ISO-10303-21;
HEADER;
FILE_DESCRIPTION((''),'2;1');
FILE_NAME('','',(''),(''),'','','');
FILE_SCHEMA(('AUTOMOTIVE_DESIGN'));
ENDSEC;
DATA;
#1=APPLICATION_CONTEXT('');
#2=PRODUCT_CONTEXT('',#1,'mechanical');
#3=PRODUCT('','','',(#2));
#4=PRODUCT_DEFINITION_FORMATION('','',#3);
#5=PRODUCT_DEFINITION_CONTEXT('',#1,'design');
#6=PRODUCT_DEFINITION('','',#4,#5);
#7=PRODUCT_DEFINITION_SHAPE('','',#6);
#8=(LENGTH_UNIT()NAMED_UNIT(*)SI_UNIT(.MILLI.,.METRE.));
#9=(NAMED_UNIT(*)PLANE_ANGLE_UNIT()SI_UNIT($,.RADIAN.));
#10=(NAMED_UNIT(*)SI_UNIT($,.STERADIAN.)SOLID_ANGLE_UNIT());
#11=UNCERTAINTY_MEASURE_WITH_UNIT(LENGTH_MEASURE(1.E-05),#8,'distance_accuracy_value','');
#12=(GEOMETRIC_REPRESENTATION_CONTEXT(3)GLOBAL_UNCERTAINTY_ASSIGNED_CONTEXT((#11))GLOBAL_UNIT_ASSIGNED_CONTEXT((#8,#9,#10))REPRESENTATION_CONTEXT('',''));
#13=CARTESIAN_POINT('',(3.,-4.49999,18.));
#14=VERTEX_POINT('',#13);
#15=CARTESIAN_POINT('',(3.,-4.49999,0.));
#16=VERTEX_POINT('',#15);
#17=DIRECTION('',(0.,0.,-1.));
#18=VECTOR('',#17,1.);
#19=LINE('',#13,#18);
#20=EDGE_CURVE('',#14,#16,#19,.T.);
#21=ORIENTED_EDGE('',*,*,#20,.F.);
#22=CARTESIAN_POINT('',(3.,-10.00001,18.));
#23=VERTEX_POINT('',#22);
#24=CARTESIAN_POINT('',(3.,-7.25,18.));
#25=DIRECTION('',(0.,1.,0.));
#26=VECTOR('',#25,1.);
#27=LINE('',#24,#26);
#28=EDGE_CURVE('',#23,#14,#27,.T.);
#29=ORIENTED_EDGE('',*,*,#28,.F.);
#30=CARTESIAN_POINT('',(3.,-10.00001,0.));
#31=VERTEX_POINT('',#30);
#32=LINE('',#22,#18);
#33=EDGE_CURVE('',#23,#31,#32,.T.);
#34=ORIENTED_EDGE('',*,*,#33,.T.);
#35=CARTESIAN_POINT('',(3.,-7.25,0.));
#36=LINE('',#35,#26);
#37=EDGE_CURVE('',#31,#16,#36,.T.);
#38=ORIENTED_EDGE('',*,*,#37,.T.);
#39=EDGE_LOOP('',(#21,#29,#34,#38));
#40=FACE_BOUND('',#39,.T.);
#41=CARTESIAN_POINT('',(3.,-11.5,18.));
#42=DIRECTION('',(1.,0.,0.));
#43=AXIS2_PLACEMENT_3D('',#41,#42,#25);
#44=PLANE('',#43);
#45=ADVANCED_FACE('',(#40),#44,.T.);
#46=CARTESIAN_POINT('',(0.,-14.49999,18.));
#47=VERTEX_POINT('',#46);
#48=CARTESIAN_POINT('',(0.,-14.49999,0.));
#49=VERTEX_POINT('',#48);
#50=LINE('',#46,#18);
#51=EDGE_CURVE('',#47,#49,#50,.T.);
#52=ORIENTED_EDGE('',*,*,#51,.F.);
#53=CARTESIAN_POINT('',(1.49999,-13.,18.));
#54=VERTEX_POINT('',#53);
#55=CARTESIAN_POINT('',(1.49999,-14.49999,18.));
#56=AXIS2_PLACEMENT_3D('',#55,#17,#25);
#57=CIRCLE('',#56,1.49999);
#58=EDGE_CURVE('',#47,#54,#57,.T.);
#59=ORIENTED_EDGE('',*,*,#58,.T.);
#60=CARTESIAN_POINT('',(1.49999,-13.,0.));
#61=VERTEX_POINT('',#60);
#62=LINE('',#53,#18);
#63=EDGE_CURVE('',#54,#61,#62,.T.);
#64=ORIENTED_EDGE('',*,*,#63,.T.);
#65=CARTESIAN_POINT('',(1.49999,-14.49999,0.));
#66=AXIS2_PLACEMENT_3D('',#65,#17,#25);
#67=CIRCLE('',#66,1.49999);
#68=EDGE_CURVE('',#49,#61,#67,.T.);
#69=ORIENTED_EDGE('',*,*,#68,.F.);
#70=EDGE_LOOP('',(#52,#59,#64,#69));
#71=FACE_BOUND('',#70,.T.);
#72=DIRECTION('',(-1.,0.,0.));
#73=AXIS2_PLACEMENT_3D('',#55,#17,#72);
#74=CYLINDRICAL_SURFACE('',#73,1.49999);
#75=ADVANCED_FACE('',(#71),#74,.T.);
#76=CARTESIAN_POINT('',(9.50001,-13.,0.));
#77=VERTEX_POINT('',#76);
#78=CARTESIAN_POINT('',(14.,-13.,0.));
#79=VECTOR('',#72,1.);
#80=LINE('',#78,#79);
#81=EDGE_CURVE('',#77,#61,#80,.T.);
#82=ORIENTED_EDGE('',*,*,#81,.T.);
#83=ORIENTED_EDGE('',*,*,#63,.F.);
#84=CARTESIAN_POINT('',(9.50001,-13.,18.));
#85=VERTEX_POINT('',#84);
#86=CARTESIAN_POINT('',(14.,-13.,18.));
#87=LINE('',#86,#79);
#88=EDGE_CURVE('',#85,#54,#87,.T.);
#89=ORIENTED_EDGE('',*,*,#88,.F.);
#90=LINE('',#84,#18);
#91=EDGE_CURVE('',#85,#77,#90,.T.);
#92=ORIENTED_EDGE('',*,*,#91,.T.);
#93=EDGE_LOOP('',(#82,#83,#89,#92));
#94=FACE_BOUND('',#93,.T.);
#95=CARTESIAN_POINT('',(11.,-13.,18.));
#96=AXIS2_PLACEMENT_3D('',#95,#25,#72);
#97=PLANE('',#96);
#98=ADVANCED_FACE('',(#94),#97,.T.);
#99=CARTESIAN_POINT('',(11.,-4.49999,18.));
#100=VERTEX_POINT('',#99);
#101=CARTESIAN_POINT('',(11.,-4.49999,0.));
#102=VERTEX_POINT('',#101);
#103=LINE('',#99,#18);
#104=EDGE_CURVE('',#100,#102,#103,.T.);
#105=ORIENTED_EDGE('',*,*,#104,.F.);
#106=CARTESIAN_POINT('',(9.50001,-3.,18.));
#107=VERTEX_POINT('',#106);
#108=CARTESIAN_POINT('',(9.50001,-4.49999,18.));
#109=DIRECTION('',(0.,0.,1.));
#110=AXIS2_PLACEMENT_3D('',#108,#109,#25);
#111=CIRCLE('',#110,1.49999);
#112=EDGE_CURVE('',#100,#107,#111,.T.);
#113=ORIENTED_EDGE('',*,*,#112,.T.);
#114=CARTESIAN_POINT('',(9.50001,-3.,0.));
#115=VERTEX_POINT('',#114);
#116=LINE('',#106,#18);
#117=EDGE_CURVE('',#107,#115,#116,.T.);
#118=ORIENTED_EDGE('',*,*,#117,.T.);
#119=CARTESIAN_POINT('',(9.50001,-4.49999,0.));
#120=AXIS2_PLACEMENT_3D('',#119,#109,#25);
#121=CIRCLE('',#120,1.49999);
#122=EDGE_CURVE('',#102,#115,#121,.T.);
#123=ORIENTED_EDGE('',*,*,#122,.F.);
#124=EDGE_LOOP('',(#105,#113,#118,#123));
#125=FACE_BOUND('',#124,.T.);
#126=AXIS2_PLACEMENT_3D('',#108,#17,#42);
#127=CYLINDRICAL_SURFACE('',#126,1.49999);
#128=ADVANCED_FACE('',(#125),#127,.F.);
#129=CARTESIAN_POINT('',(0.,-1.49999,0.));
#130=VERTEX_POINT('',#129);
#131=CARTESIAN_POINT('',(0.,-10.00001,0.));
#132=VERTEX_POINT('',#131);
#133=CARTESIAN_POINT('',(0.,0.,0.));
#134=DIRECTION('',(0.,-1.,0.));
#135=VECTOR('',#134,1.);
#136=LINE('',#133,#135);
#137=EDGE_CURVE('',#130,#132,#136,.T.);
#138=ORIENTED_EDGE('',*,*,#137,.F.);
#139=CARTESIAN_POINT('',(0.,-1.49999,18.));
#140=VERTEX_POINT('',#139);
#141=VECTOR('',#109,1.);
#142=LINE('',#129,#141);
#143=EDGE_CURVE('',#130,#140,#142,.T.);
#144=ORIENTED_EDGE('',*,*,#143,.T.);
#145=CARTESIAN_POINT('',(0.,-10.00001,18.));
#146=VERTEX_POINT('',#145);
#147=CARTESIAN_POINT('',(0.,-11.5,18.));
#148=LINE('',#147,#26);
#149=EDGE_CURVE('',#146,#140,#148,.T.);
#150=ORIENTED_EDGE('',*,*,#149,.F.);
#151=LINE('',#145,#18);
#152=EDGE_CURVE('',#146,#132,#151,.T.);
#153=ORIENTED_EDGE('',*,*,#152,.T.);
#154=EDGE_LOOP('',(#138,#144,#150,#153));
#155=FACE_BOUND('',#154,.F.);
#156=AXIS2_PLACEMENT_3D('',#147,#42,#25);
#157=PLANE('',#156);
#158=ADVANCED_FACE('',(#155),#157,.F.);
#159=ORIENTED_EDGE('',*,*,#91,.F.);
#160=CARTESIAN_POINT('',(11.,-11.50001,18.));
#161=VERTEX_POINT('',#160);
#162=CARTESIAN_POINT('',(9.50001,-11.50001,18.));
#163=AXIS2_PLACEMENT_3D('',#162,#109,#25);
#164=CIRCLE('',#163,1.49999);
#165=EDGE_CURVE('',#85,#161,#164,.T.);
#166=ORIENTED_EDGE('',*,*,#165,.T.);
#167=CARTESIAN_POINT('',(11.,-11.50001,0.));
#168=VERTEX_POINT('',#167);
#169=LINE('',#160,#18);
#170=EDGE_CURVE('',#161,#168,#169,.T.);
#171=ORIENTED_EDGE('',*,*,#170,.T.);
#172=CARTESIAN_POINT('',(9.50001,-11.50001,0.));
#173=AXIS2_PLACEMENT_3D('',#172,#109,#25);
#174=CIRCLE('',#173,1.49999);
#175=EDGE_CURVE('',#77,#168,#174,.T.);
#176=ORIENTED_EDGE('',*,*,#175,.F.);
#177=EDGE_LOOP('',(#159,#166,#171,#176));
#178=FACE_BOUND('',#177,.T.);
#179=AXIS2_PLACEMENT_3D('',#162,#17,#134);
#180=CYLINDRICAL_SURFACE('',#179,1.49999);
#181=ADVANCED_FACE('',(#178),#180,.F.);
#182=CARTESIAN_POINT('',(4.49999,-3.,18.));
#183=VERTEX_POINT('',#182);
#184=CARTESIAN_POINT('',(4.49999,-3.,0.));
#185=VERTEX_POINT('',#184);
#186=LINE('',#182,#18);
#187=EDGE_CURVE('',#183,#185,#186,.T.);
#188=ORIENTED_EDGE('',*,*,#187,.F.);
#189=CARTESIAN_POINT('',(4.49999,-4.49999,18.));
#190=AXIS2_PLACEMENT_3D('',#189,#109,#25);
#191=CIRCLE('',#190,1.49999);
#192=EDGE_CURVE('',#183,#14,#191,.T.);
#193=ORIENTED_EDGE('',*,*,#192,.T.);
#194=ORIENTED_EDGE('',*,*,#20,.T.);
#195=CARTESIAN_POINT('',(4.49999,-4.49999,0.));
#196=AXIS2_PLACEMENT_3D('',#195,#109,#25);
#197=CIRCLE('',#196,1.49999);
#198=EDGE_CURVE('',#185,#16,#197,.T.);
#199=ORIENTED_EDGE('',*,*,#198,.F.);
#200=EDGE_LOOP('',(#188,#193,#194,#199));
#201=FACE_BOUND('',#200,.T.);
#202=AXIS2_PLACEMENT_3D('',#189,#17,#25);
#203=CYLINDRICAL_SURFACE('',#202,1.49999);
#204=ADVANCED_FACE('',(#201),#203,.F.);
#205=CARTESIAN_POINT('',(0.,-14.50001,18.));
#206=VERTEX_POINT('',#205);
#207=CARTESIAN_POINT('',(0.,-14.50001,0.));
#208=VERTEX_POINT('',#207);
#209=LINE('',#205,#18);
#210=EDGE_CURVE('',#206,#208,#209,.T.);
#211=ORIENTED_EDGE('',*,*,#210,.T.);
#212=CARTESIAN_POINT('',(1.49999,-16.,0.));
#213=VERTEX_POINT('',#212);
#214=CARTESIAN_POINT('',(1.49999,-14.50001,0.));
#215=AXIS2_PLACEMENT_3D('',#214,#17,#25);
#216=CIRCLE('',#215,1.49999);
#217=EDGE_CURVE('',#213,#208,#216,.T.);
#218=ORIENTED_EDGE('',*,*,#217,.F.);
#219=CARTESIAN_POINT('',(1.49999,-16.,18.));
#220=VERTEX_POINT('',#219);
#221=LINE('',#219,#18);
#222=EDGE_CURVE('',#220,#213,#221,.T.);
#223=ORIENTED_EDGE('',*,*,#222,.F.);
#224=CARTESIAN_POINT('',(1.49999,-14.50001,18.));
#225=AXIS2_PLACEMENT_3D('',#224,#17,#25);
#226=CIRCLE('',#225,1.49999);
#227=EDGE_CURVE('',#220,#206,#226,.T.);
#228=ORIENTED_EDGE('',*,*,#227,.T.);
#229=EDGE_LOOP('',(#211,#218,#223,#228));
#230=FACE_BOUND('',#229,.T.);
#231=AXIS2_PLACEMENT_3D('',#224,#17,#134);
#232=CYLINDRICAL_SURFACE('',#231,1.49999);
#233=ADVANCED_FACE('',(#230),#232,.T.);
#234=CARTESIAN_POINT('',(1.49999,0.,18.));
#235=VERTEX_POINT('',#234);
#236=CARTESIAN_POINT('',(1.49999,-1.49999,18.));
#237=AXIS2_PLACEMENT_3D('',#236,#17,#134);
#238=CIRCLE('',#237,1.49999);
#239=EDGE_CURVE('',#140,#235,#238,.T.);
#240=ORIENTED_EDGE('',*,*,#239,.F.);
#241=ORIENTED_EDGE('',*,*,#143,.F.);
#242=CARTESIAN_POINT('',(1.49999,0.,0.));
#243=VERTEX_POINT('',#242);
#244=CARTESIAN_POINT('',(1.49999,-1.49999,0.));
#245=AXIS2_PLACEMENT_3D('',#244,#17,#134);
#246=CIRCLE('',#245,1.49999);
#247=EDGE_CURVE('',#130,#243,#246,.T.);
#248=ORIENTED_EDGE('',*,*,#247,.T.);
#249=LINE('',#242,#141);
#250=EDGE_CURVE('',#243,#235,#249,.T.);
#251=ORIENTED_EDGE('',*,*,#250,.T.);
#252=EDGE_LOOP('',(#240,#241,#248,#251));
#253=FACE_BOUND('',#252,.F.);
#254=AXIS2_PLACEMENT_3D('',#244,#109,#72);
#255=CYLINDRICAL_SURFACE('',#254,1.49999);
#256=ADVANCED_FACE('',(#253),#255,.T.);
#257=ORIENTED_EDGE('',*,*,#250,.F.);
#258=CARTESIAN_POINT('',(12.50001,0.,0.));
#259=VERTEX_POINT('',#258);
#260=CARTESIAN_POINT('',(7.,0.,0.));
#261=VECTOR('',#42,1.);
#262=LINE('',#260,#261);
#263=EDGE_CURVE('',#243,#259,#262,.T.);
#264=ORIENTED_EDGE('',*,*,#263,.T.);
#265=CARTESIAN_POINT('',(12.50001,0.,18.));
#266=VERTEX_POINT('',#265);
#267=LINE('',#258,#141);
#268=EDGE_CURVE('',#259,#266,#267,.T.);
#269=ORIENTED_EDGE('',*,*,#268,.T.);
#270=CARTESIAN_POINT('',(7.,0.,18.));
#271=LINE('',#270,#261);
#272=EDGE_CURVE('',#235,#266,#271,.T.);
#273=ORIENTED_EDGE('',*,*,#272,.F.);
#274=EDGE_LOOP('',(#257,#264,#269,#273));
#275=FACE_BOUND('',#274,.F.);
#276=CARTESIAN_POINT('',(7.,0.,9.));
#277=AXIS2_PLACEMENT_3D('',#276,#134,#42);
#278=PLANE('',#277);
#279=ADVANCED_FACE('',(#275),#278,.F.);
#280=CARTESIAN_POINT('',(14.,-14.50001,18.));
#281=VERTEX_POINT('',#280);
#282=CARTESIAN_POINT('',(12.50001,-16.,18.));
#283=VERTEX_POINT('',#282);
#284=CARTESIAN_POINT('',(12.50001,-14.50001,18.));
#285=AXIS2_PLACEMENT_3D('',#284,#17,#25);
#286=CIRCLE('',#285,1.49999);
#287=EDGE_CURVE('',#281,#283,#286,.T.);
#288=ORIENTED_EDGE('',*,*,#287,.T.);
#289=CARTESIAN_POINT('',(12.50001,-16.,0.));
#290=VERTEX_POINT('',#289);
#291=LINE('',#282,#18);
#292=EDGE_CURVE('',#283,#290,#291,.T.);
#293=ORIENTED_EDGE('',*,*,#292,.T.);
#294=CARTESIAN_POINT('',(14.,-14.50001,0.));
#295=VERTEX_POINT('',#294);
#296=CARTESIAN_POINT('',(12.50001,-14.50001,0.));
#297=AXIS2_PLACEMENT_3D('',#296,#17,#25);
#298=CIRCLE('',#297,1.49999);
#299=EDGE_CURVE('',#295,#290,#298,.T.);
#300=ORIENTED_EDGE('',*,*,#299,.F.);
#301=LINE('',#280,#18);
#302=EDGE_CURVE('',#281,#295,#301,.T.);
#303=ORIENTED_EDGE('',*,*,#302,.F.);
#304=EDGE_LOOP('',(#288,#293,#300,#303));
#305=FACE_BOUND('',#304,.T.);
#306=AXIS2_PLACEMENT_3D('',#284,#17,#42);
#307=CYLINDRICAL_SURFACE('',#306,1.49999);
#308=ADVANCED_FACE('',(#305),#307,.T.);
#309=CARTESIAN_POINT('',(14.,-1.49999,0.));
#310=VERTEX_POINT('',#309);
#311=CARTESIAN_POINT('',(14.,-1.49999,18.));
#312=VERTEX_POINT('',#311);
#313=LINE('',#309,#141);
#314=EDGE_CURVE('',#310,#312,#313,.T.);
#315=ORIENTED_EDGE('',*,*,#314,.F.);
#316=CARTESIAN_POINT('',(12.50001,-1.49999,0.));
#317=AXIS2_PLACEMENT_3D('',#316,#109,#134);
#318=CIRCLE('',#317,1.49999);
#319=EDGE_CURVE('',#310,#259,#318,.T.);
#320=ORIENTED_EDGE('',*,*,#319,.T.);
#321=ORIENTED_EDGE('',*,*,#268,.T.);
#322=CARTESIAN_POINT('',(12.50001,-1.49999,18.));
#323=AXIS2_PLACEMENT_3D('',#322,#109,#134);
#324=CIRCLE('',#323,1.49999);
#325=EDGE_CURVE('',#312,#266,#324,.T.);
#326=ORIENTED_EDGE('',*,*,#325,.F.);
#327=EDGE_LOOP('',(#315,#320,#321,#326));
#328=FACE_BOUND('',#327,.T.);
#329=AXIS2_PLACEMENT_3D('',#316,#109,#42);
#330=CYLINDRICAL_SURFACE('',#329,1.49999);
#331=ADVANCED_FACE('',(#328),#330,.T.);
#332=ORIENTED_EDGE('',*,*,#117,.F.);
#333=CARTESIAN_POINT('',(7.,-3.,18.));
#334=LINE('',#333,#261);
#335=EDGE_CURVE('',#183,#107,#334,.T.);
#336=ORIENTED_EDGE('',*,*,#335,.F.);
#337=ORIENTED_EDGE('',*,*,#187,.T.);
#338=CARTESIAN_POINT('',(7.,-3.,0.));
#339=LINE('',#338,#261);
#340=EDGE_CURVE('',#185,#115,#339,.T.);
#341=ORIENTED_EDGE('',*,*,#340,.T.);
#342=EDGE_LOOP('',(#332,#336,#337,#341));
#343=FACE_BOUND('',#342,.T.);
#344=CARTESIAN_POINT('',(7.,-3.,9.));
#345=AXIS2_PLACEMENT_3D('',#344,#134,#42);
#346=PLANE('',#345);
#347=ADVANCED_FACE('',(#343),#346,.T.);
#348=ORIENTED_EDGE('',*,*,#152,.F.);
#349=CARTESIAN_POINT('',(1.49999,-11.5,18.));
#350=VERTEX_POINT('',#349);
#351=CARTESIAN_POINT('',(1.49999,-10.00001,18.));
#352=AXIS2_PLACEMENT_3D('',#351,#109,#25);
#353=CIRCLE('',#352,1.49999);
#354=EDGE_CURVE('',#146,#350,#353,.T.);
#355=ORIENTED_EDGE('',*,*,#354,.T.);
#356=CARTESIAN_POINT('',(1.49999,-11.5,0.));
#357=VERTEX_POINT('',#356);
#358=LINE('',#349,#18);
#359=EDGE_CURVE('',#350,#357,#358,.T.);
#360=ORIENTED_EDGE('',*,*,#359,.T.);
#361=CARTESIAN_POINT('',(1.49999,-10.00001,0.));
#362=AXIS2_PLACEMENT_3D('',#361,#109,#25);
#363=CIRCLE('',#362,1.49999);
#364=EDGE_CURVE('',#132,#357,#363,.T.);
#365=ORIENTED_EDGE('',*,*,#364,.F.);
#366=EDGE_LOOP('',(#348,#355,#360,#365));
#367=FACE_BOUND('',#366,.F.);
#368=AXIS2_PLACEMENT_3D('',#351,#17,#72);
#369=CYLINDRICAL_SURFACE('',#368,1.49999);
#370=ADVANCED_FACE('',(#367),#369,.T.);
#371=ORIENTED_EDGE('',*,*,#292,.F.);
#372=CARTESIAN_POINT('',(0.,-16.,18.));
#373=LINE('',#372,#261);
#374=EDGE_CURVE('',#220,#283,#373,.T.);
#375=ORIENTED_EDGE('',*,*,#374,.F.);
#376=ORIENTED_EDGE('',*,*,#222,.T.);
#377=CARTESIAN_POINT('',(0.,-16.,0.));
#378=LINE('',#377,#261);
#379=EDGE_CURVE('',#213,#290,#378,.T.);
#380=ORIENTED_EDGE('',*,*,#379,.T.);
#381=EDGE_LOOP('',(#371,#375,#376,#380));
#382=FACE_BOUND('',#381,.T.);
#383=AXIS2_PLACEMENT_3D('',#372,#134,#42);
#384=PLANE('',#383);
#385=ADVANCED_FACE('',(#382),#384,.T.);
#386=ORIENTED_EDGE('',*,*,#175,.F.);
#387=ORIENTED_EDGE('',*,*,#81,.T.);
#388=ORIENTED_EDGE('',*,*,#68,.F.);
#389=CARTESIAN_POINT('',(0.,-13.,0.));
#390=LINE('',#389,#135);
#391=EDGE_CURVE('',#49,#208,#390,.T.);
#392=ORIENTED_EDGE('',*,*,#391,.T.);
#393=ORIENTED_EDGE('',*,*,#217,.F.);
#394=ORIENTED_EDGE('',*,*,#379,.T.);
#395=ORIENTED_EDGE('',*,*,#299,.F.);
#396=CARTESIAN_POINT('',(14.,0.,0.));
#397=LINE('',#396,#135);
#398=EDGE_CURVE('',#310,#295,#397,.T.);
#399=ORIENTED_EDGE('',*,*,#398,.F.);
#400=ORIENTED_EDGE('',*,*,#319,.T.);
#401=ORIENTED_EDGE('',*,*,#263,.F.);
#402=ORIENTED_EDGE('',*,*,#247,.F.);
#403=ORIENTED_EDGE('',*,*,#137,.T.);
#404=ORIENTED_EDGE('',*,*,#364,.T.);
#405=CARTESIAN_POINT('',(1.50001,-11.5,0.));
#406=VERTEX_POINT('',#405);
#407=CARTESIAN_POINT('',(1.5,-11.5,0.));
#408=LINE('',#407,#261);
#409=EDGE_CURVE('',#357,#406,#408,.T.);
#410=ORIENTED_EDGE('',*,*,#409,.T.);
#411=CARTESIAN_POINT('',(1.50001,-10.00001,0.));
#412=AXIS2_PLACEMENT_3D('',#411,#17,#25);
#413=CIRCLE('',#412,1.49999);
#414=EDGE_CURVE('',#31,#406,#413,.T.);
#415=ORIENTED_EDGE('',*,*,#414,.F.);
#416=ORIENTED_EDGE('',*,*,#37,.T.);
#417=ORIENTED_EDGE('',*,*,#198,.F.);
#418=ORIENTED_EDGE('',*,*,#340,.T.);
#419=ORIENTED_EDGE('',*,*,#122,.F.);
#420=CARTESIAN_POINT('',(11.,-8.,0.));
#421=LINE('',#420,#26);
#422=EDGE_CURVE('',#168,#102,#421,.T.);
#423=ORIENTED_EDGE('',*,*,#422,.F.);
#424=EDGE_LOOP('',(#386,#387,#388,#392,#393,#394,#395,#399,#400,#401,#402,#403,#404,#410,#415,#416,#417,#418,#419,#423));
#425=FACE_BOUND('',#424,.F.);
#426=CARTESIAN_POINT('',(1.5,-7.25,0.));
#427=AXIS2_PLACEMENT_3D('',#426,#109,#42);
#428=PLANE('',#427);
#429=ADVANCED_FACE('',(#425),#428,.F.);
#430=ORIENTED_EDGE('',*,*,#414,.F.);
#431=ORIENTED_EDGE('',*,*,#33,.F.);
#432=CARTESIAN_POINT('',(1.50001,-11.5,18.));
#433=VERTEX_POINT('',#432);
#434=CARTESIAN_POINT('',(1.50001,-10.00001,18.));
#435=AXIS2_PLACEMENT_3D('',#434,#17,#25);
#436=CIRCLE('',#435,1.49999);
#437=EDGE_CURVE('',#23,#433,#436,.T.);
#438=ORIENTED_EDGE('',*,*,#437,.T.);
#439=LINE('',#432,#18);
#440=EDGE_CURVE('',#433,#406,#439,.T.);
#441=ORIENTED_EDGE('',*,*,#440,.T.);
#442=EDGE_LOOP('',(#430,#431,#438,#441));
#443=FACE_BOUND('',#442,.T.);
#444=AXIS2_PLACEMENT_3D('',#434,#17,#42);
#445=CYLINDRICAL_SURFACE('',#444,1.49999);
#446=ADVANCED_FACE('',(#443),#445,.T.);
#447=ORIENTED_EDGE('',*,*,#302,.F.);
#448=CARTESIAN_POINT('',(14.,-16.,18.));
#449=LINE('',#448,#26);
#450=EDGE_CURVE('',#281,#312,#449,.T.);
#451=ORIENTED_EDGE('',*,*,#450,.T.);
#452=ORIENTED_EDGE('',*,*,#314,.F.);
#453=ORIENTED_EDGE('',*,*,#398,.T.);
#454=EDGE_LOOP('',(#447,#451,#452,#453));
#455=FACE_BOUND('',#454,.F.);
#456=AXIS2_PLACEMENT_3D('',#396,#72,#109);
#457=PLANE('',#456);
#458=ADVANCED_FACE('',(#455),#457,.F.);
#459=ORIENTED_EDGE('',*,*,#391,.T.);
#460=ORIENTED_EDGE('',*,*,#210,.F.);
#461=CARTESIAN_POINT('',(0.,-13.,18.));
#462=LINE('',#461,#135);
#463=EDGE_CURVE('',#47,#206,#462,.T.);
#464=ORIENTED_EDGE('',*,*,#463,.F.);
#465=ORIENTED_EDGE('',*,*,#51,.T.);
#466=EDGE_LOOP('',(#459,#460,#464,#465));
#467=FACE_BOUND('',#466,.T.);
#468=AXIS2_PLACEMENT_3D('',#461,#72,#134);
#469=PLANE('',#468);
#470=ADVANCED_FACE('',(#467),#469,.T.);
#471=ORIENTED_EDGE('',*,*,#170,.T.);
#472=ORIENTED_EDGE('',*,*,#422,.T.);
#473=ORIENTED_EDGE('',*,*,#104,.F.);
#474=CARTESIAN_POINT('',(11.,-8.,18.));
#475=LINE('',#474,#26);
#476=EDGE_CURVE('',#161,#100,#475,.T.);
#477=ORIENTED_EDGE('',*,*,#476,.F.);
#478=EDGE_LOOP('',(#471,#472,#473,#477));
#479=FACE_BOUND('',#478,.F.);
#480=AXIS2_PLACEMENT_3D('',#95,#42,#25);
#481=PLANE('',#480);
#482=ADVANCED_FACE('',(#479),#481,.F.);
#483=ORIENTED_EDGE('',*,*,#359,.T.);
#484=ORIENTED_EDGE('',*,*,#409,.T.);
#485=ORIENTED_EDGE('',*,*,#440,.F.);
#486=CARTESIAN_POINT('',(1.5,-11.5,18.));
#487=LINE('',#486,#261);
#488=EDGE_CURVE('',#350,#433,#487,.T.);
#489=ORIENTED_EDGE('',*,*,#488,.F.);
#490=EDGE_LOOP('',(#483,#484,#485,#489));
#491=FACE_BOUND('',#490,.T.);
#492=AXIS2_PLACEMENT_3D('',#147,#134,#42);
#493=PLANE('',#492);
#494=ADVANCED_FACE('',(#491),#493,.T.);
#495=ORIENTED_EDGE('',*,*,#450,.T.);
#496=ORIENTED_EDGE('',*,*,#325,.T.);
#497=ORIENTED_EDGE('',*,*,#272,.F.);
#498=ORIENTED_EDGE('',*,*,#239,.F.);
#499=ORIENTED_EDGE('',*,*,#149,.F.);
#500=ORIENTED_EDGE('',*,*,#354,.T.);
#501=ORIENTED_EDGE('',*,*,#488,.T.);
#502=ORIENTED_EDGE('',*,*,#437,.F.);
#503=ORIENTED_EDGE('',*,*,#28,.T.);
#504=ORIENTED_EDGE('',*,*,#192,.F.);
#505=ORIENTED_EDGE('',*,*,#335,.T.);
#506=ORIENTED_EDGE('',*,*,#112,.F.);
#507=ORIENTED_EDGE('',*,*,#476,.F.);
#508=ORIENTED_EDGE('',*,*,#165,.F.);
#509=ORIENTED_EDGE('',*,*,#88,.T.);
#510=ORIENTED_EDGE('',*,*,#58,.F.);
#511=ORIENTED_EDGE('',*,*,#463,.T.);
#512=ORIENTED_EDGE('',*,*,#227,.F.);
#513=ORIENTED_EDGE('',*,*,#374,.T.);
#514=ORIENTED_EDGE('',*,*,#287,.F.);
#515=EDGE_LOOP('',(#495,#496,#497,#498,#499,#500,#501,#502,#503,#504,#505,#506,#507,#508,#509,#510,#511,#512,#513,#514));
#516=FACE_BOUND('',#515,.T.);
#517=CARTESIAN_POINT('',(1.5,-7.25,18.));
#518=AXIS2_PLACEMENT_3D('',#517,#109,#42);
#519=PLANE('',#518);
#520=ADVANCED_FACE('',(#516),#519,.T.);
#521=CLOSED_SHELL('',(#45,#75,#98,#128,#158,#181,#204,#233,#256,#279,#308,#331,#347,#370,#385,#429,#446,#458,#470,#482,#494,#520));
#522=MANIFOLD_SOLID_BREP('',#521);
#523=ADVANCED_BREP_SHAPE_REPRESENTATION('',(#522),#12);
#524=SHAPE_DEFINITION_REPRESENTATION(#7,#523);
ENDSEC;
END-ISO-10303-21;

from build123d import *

# Parameters (mm, degrees)
F0_W     = 14
F0_H     = 18
F1_DEPTH = 3
F2_W     = 3
F2_H     = 8.5
F2_H_2   = 10
F3_DEPTH = 18
F4_R     = 1.49999


# Not quite as in the source:
# - a fillet or chamfer is up to 0.001 mm smaller than in the source, because OpenCascade refuses the exact size


with BuildPart() as f1:
    # F0 (on Front) → F1 (new body)
    with BuildSketch(Plane.XZ):
        with Locations((7, 9)):
            Rectangle(F0_W, F0_H)
    extrude(amount=F1_DEPTH)

    # F2 (on face) → F3 (join, through all)
    with BuildSketch(Plane.XY.offset(18)):
        with Locations((1.5, -7.25)):
            Rectangle(F2_W, F2_H)
        Polygon((3, -13), (0, -13), (0, -16), (14, -16), (14, -13), (11, -13), align=None)
        with Locations((12.5, -8)):
            Rectangle(F2_W, F2_H_2)
    extrude(amount=-F3_DEPTH)

    # F4 (radius 1.5 in the source; OpenCascade refuses exactly that, so slightly less here)
    f4_edges = [f1.edges().sort_by_distance(p)[0] for p in [
        (0, -11.5, 9),
        (0, -13, 9),
        (0, -16, 9),
        (3, -11.5, 9),
        (14, -16, 9),
        (14, 0, 9),
        (0, 0, 9),
        (3, -3, 9),
        (11, -3, 9),
        (11, -13, 9),
    ]]
    fillet(f4_edges, radius=F4_R)


solid = f1.part
